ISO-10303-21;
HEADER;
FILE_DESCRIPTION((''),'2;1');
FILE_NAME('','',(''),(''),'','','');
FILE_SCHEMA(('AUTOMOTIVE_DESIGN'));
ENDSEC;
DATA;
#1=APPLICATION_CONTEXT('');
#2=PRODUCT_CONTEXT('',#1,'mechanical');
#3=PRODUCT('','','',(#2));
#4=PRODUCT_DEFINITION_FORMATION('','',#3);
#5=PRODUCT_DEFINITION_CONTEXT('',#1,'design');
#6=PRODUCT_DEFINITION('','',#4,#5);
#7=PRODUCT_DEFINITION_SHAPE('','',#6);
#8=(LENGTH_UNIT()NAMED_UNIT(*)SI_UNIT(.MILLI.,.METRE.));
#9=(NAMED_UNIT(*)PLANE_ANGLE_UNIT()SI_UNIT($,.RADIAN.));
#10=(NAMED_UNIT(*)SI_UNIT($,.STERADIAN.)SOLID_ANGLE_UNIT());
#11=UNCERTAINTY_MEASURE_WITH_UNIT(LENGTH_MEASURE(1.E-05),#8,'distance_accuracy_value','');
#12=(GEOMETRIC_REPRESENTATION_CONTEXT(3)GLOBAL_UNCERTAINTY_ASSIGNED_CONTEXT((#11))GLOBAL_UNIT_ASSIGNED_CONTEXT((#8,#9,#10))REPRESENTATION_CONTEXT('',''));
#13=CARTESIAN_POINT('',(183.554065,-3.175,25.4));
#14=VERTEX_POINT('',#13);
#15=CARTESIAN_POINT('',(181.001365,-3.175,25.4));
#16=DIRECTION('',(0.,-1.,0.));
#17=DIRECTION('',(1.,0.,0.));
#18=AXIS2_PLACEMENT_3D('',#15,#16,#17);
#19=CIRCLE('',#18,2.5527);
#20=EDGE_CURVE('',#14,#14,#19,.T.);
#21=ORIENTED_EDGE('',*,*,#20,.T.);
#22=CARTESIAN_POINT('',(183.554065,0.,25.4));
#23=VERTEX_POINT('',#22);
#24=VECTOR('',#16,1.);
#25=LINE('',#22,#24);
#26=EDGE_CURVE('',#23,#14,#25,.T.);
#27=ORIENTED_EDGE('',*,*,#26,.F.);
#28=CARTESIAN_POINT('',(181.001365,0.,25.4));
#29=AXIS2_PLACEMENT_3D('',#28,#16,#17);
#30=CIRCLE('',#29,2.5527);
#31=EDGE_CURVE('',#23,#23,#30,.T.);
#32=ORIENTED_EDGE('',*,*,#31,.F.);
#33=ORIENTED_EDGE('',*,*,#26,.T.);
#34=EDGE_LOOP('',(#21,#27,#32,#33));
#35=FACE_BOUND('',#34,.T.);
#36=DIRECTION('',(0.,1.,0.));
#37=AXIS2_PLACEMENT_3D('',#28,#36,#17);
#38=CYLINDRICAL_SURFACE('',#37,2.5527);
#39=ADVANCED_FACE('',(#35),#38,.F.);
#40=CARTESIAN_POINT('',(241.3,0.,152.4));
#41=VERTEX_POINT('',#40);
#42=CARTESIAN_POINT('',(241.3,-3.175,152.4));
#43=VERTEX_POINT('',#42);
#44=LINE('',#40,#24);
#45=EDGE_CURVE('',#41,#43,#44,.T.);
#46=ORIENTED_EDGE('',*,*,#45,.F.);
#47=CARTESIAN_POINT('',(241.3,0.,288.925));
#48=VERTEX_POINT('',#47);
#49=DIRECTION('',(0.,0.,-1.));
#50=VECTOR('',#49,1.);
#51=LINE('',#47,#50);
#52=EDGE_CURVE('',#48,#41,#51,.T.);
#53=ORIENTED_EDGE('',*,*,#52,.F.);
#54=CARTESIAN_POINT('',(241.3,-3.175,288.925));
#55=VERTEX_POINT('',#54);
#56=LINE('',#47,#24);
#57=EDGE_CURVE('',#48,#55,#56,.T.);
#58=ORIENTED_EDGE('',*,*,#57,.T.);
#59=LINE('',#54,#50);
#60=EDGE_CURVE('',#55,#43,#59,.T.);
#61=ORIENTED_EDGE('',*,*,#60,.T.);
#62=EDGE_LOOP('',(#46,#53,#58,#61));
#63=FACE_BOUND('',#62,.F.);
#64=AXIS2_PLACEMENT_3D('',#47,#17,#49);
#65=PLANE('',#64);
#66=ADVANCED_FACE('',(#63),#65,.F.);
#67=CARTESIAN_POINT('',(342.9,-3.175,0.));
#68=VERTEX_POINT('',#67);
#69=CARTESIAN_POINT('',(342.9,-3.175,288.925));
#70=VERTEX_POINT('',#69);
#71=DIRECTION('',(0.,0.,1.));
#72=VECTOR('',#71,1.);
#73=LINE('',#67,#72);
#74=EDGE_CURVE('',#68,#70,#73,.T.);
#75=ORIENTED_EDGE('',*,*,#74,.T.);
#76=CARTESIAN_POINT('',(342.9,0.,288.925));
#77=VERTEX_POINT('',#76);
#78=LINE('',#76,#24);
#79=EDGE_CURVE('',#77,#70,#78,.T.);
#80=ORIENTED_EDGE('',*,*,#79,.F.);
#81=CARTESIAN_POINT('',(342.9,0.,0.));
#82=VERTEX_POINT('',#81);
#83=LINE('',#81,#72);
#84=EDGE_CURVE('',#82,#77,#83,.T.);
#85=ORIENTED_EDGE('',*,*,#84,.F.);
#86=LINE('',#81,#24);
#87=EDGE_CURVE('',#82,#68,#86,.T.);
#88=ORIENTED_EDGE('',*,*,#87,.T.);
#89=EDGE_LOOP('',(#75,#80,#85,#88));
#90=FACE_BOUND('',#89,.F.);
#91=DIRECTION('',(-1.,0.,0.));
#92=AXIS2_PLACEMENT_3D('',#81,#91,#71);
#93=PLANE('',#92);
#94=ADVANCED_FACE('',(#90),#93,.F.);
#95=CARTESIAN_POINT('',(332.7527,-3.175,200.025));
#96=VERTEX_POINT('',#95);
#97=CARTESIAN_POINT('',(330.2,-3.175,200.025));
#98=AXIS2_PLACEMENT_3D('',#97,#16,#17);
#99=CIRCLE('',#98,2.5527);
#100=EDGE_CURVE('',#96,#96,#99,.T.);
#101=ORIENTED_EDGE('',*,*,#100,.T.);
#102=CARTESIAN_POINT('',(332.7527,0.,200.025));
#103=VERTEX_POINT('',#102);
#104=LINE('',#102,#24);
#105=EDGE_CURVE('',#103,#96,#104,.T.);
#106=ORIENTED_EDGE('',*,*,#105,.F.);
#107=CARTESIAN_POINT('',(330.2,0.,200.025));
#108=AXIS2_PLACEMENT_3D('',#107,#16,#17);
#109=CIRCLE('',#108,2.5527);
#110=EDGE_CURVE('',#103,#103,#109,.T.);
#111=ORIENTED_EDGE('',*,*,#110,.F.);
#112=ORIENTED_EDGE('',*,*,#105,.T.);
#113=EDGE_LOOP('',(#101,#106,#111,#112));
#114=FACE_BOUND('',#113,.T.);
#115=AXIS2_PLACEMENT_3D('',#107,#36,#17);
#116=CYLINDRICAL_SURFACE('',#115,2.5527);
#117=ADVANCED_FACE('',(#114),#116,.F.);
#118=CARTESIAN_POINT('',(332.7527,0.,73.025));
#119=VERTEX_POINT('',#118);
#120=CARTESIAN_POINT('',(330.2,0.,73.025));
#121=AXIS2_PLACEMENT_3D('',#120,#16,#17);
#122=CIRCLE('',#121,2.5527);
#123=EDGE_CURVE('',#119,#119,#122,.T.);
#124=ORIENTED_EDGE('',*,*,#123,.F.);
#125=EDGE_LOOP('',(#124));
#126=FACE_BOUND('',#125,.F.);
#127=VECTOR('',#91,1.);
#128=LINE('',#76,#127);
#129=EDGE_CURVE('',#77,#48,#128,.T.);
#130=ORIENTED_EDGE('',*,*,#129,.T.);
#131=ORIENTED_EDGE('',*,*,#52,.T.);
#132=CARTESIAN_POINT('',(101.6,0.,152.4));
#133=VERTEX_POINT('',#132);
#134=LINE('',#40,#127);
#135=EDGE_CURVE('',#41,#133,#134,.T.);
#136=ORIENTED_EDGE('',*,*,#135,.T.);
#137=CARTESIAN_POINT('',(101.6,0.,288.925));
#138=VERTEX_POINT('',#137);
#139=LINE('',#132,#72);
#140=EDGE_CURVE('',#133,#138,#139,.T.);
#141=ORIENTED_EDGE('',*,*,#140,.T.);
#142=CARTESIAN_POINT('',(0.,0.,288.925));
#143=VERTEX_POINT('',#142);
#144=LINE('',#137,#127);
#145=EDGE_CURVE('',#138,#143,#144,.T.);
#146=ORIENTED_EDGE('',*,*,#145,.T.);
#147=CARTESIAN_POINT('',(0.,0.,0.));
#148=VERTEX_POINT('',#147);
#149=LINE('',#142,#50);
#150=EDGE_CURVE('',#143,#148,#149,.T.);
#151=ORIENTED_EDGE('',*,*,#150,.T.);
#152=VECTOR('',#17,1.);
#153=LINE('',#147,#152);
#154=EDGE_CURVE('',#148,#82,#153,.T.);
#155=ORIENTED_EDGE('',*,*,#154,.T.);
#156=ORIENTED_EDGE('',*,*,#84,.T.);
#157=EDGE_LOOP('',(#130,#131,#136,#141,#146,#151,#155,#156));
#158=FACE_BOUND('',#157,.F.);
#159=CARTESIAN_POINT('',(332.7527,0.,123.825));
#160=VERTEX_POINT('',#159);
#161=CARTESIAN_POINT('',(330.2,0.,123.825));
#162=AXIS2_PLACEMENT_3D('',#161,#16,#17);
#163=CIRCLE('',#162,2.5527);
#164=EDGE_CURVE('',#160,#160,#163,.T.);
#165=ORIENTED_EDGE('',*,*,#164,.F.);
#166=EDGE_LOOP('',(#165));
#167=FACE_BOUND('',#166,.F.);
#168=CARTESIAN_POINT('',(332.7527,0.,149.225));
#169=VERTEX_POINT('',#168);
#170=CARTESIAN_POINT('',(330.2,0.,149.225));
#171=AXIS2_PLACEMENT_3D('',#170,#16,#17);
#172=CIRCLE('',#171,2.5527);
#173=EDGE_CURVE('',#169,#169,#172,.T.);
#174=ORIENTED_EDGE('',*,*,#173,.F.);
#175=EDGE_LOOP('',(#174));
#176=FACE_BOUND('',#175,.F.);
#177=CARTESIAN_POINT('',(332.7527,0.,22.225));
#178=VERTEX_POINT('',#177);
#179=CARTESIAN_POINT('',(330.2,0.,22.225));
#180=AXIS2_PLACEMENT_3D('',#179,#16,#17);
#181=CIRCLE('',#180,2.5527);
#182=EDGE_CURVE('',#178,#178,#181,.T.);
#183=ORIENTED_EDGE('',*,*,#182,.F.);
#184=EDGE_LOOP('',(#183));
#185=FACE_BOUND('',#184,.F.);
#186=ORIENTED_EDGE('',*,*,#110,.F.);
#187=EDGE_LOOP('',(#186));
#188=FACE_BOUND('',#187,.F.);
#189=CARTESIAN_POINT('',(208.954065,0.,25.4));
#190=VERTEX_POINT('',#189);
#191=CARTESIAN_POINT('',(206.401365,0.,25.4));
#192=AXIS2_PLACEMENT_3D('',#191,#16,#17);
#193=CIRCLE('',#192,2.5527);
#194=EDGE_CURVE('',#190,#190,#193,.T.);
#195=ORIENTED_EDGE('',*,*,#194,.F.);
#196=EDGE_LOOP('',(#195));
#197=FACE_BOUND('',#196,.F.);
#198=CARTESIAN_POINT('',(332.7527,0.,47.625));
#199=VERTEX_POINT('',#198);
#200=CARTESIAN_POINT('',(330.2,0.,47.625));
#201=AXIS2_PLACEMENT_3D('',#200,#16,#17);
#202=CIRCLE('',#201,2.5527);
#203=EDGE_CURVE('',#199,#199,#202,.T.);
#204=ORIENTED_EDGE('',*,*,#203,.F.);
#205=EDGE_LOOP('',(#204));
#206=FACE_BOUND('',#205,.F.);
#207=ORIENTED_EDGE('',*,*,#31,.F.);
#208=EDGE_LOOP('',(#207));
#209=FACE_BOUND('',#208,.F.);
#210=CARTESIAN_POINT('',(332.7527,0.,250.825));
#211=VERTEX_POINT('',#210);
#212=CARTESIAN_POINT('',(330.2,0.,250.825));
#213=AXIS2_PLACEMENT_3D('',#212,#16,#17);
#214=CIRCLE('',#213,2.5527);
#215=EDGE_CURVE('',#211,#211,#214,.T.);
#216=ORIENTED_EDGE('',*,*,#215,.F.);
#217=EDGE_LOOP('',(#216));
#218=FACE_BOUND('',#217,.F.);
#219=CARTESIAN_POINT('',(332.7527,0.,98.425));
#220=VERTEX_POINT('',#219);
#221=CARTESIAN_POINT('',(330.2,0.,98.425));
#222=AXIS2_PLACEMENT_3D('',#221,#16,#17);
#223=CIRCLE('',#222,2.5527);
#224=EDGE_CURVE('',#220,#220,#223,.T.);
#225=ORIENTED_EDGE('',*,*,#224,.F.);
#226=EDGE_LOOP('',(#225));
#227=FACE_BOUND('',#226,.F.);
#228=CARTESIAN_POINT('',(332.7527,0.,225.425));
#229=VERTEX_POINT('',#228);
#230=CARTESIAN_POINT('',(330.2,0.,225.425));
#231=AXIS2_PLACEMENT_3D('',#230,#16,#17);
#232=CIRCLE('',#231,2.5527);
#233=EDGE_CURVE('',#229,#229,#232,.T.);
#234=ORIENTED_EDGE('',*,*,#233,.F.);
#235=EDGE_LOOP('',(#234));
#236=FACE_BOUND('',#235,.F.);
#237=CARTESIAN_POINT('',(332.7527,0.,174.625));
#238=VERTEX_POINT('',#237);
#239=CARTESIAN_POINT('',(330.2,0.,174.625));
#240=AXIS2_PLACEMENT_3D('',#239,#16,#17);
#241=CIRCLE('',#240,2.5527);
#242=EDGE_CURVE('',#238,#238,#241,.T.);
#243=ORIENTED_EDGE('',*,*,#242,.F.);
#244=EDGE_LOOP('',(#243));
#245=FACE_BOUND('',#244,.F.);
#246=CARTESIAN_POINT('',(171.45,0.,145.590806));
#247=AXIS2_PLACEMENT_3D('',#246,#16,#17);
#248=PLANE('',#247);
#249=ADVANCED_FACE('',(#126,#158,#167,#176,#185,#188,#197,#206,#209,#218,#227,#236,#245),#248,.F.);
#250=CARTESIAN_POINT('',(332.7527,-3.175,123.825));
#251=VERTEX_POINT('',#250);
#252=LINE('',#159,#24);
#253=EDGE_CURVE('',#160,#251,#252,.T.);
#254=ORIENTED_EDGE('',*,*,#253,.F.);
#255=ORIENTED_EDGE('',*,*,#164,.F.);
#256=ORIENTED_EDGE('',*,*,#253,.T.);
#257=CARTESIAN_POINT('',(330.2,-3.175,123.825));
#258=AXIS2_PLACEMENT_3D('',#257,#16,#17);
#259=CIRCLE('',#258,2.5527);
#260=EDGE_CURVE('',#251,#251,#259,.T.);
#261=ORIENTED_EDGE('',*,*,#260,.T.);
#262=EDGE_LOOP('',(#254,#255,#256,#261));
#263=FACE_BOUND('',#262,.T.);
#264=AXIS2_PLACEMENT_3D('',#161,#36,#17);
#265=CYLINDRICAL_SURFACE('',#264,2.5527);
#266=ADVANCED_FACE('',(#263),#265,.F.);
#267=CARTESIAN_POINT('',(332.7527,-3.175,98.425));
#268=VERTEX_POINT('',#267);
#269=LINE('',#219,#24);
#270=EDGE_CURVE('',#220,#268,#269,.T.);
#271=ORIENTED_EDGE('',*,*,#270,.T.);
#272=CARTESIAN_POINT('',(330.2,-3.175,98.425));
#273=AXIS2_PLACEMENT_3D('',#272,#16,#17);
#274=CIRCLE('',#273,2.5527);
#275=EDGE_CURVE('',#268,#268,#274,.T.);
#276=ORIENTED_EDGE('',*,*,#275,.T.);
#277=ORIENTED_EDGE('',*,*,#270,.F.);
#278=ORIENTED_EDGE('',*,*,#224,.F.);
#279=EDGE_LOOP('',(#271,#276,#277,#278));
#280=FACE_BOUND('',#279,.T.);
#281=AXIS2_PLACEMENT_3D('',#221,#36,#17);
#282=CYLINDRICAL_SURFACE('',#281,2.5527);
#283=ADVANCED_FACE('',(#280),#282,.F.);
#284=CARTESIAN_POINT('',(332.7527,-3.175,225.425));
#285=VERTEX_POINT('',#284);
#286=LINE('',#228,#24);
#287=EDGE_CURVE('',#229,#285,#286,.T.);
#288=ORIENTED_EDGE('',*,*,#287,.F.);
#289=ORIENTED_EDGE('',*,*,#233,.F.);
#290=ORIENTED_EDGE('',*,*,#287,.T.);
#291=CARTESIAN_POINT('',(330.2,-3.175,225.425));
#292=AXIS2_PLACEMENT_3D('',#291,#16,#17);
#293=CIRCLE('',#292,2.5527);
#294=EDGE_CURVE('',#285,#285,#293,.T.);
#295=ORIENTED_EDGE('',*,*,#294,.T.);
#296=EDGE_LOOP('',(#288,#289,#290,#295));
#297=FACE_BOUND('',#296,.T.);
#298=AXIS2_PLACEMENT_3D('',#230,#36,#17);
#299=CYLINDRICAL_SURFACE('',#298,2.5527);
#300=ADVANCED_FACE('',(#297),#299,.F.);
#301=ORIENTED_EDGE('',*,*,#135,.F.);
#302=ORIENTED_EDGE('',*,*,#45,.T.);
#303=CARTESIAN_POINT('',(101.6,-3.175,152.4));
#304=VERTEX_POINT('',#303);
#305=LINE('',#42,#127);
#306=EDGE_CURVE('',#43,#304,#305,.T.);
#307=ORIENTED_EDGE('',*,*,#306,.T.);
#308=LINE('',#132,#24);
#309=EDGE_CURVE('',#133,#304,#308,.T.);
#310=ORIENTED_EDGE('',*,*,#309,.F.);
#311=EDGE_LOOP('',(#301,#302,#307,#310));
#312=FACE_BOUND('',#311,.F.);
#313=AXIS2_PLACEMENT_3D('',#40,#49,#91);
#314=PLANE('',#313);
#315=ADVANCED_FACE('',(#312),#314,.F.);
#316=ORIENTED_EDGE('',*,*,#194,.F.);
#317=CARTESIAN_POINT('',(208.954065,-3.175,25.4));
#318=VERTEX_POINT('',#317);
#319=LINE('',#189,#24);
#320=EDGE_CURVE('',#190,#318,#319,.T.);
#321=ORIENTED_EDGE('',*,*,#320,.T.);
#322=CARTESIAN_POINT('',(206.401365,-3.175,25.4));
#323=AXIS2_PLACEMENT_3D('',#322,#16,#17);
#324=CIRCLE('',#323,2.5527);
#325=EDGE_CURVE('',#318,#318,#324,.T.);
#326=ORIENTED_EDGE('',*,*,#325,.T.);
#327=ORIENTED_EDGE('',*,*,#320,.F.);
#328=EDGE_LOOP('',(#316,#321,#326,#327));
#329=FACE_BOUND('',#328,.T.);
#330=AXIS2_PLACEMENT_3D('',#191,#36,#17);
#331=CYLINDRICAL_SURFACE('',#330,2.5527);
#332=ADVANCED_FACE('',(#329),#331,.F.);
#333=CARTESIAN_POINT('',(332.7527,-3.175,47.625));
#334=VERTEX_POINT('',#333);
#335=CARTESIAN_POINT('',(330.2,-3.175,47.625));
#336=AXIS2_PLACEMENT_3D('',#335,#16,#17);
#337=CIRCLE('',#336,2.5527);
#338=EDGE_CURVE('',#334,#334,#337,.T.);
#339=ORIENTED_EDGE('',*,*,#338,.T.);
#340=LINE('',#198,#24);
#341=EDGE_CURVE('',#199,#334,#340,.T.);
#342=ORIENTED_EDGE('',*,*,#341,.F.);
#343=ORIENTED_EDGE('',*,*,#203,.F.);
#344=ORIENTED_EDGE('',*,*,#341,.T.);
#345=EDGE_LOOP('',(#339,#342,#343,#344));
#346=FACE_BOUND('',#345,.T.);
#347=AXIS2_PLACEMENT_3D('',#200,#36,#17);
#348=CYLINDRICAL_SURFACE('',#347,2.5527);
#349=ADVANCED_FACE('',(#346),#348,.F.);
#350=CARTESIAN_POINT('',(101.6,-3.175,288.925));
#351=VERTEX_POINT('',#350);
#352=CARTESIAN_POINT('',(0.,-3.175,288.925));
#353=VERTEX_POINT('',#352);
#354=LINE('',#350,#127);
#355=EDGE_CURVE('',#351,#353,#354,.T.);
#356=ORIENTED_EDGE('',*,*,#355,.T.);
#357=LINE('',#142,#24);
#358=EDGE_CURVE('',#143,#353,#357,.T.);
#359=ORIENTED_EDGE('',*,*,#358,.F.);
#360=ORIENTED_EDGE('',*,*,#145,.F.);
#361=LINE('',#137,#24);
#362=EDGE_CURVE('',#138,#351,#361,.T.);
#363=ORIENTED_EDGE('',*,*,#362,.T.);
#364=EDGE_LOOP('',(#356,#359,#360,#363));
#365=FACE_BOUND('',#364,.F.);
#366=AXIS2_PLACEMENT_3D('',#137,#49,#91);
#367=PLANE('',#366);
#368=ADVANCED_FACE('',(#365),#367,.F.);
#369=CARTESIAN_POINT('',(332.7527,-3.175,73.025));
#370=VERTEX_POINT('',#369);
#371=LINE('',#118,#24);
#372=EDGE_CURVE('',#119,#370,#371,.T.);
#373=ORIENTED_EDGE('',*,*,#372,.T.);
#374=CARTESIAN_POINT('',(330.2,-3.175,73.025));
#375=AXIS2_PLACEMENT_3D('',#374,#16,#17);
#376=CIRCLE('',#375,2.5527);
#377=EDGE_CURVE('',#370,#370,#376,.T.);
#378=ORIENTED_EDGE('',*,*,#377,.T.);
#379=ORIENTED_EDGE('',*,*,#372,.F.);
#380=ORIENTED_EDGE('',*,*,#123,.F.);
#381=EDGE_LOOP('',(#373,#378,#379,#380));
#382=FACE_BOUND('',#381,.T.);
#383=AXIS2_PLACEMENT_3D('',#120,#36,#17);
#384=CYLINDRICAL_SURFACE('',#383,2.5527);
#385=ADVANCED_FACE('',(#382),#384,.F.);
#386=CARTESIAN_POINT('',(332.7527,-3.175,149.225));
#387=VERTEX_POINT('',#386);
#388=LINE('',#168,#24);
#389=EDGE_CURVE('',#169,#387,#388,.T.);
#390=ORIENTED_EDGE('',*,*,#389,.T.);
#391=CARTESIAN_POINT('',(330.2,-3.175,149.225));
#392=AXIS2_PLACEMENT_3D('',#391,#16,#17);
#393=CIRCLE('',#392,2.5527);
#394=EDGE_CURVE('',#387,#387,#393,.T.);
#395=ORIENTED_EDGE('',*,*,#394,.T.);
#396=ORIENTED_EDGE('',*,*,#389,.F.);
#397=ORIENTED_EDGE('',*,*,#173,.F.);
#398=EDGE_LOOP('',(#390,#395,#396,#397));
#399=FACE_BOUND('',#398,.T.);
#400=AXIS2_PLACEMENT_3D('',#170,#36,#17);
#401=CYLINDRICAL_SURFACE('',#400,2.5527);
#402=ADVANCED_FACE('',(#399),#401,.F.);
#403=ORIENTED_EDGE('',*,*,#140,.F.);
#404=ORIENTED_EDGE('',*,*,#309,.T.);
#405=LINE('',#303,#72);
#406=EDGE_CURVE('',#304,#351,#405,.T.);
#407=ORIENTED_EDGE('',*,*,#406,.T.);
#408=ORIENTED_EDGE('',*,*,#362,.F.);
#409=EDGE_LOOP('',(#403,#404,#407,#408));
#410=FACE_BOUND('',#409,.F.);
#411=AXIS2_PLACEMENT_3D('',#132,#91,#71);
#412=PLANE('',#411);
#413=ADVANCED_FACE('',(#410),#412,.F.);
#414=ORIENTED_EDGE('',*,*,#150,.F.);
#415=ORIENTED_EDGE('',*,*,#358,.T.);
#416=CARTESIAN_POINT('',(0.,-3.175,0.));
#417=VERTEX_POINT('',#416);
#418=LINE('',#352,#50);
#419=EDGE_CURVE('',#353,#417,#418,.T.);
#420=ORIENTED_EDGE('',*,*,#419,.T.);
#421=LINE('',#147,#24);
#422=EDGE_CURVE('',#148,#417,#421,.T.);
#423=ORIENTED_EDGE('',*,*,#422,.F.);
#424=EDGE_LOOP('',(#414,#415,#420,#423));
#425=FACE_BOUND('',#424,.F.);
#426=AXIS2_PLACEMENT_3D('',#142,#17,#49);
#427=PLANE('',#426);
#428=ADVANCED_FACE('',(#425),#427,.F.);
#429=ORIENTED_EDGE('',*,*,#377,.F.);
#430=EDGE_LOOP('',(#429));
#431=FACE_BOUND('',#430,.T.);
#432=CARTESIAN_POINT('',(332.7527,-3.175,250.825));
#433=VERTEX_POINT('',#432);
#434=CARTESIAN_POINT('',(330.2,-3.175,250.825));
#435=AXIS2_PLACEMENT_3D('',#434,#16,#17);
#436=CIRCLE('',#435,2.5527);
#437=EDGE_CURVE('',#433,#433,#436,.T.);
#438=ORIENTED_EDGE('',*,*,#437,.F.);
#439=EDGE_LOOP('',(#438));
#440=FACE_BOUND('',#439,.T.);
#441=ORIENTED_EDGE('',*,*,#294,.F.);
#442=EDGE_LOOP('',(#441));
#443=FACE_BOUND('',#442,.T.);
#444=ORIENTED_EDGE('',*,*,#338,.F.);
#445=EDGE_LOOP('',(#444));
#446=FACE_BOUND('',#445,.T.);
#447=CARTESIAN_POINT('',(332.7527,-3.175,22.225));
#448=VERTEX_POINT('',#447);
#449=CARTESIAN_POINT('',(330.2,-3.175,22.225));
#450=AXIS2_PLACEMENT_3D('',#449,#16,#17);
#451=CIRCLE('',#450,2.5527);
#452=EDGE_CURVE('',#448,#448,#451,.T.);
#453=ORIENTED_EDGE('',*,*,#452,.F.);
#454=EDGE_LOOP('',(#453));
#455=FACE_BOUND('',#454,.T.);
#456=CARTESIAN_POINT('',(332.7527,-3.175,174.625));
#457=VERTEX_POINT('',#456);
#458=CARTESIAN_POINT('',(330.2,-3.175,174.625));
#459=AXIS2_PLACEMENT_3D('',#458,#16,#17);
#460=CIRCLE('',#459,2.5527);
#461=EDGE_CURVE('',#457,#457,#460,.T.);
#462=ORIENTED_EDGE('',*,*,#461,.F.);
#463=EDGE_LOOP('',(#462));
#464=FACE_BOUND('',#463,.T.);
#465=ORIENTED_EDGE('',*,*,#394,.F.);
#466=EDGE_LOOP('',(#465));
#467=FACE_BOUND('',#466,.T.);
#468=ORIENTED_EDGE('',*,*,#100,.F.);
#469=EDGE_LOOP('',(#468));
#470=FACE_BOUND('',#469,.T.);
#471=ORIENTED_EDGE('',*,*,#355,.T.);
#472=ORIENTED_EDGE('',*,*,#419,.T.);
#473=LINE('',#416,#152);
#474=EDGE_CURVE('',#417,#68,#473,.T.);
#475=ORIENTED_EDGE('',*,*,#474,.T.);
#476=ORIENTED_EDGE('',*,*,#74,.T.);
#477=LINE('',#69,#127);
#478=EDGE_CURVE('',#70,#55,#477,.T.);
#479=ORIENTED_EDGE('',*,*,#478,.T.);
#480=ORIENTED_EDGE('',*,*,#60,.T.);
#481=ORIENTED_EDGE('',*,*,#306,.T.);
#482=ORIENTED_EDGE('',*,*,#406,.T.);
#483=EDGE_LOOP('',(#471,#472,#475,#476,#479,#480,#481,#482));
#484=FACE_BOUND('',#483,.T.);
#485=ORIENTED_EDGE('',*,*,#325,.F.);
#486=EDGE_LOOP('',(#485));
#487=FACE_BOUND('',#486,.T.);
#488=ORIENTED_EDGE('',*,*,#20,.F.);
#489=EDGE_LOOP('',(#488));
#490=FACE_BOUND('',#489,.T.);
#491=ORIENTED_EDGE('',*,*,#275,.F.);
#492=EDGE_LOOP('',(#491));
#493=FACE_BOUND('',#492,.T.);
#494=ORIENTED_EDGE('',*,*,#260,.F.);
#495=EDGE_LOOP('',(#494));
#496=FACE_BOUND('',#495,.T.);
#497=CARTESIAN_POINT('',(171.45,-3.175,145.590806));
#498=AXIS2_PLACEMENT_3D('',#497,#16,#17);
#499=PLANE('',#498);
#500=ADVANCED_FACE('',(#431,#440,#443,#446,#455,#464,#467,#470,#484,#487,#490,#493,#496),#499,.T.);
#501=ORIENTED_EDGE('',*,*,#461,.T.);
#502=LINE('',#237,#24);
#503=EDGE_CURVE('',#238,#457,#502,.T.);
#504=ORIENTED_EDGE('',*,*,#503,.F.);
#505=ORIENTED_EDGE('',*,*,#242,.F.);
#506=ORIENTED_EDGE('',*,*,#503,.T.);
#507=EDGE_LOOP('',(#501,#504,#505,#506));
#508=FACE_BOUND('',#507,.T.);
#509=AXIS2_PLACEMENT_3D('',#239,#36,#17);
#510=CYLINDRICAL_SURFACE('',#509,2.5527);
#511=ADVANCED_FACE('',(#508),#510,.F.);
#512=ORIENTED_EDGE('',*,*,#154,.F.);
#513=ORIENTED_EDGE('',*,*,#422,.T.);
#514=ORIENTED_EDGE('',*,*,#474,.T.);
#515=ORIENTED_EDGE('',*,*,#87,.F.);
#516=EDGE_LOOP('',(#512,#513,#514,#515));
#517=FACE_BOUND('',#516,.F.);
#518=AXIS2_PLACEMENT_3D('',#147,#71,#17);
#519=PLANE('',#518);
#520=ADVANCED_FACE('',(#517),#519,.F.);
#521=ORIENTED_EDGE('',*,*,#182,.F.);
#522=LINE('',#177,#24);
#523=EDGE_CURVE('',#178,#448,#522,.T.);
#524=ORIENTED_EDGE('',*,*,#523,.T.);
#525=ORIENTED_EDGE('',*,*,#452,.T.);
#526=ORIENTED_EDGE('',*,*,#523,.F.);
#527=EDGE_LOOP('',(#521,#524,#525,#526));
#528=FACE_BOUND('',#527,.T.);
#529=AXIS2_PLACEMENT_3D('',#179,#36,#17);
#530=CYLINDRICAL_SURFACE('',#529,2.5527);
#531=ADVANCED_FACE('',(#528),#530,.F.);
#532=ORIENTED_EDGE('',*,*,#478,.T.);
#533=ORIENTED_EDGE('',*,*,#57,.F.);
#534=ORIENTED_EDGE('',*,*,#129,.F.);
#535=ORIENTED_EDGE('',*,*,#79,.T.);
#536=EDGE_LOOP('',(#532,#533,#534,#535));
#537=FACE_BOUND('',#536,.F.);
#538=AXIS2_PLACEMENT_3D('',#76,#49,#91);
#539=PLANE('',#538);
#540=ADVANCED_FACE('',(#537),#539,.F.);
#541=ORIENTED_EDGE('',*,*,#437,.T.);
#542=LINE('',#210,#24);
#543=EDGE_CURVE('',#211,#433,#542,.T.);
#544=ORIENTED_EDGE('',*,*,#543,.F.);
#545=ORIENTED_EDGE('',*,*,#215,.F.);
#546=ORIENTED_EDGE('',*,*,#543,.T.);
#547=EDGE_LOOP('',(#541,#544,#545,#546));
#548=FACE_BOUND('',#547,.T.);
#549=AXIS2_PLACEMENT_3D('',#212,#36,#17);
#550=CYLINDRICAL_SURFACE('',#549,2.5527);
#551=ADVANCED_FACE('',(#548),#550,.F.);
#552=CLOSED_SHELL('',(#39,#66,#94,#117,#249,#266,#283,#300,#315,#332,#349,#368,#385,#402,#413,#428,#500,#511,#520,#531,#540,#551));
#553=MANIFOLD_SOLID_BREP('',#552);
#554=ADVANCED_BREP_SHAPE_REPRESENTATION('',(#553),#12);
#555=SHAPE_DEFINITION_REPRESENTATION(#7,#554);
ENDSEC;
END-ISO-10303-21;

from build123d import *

# Parameters (mm, degrees)
F0_R     = 2.5527
F1_DEPTH = 3.175


with BuildPart() as f1:
    # F0 (on Front) → F1 (new body)
    with BuildSketch(Plane.XZ):
        Polygon((0, 288.925), (0, 0), (342.9, 0), (342.9, 288.925), (241.3, 288.925), (241.3, 152.4), (101.6, 152.4), (101.6, 288.925), align=None)
        with Locations((181.0013651848, 25.4)):
            Circle(F0_R, mode=Mode.SUBTRACT)
        with Locations((206.4013651848, 25.4)):
            Circle(F0_R, mode=Mode.SUBTRACT)
        with Locations((330.2, 22.225)):
            Circle(F0_R, mode=Mode.SUBTRACT)
        with Locations((330.2, 47.625)):
            Circle(F0_R, mode=Mode.SUBTRACT)
        with Locations((330.2, 73.025)):
            Circle(F0_R, mode=Mode.SUBTRACT)
        with Locations((330.2, 98.425)):
            Circle(F0_R, mode=Mode.SUBTRACT)
        with Locations((330.2, 123.825)):
            Circle(F0_R, mode=Mode.SUBTRACT)
        with Locations((330.2, 149.225)):
            Circle(F0_R, mode=Mode.SUBTRACT)
        with Locations((330.2, 174.625)):
            Circle(F0_R, mode=Mode.SUBTRACT)
        with Locations((330.2, 200.025)):
            Circle(F0_R, mode=Mode.SUBTRACT)
        with Locations((330.2, 225.425)):
            Circle(F0_R, mode=Mode.SUBTRACT)
        with Locations((330.2, 250.825)):
            Circle(F0_R, mode=Mode.SUBTRACT)
    extrude(amount=F1_DEPTH)


solid = f1.part
